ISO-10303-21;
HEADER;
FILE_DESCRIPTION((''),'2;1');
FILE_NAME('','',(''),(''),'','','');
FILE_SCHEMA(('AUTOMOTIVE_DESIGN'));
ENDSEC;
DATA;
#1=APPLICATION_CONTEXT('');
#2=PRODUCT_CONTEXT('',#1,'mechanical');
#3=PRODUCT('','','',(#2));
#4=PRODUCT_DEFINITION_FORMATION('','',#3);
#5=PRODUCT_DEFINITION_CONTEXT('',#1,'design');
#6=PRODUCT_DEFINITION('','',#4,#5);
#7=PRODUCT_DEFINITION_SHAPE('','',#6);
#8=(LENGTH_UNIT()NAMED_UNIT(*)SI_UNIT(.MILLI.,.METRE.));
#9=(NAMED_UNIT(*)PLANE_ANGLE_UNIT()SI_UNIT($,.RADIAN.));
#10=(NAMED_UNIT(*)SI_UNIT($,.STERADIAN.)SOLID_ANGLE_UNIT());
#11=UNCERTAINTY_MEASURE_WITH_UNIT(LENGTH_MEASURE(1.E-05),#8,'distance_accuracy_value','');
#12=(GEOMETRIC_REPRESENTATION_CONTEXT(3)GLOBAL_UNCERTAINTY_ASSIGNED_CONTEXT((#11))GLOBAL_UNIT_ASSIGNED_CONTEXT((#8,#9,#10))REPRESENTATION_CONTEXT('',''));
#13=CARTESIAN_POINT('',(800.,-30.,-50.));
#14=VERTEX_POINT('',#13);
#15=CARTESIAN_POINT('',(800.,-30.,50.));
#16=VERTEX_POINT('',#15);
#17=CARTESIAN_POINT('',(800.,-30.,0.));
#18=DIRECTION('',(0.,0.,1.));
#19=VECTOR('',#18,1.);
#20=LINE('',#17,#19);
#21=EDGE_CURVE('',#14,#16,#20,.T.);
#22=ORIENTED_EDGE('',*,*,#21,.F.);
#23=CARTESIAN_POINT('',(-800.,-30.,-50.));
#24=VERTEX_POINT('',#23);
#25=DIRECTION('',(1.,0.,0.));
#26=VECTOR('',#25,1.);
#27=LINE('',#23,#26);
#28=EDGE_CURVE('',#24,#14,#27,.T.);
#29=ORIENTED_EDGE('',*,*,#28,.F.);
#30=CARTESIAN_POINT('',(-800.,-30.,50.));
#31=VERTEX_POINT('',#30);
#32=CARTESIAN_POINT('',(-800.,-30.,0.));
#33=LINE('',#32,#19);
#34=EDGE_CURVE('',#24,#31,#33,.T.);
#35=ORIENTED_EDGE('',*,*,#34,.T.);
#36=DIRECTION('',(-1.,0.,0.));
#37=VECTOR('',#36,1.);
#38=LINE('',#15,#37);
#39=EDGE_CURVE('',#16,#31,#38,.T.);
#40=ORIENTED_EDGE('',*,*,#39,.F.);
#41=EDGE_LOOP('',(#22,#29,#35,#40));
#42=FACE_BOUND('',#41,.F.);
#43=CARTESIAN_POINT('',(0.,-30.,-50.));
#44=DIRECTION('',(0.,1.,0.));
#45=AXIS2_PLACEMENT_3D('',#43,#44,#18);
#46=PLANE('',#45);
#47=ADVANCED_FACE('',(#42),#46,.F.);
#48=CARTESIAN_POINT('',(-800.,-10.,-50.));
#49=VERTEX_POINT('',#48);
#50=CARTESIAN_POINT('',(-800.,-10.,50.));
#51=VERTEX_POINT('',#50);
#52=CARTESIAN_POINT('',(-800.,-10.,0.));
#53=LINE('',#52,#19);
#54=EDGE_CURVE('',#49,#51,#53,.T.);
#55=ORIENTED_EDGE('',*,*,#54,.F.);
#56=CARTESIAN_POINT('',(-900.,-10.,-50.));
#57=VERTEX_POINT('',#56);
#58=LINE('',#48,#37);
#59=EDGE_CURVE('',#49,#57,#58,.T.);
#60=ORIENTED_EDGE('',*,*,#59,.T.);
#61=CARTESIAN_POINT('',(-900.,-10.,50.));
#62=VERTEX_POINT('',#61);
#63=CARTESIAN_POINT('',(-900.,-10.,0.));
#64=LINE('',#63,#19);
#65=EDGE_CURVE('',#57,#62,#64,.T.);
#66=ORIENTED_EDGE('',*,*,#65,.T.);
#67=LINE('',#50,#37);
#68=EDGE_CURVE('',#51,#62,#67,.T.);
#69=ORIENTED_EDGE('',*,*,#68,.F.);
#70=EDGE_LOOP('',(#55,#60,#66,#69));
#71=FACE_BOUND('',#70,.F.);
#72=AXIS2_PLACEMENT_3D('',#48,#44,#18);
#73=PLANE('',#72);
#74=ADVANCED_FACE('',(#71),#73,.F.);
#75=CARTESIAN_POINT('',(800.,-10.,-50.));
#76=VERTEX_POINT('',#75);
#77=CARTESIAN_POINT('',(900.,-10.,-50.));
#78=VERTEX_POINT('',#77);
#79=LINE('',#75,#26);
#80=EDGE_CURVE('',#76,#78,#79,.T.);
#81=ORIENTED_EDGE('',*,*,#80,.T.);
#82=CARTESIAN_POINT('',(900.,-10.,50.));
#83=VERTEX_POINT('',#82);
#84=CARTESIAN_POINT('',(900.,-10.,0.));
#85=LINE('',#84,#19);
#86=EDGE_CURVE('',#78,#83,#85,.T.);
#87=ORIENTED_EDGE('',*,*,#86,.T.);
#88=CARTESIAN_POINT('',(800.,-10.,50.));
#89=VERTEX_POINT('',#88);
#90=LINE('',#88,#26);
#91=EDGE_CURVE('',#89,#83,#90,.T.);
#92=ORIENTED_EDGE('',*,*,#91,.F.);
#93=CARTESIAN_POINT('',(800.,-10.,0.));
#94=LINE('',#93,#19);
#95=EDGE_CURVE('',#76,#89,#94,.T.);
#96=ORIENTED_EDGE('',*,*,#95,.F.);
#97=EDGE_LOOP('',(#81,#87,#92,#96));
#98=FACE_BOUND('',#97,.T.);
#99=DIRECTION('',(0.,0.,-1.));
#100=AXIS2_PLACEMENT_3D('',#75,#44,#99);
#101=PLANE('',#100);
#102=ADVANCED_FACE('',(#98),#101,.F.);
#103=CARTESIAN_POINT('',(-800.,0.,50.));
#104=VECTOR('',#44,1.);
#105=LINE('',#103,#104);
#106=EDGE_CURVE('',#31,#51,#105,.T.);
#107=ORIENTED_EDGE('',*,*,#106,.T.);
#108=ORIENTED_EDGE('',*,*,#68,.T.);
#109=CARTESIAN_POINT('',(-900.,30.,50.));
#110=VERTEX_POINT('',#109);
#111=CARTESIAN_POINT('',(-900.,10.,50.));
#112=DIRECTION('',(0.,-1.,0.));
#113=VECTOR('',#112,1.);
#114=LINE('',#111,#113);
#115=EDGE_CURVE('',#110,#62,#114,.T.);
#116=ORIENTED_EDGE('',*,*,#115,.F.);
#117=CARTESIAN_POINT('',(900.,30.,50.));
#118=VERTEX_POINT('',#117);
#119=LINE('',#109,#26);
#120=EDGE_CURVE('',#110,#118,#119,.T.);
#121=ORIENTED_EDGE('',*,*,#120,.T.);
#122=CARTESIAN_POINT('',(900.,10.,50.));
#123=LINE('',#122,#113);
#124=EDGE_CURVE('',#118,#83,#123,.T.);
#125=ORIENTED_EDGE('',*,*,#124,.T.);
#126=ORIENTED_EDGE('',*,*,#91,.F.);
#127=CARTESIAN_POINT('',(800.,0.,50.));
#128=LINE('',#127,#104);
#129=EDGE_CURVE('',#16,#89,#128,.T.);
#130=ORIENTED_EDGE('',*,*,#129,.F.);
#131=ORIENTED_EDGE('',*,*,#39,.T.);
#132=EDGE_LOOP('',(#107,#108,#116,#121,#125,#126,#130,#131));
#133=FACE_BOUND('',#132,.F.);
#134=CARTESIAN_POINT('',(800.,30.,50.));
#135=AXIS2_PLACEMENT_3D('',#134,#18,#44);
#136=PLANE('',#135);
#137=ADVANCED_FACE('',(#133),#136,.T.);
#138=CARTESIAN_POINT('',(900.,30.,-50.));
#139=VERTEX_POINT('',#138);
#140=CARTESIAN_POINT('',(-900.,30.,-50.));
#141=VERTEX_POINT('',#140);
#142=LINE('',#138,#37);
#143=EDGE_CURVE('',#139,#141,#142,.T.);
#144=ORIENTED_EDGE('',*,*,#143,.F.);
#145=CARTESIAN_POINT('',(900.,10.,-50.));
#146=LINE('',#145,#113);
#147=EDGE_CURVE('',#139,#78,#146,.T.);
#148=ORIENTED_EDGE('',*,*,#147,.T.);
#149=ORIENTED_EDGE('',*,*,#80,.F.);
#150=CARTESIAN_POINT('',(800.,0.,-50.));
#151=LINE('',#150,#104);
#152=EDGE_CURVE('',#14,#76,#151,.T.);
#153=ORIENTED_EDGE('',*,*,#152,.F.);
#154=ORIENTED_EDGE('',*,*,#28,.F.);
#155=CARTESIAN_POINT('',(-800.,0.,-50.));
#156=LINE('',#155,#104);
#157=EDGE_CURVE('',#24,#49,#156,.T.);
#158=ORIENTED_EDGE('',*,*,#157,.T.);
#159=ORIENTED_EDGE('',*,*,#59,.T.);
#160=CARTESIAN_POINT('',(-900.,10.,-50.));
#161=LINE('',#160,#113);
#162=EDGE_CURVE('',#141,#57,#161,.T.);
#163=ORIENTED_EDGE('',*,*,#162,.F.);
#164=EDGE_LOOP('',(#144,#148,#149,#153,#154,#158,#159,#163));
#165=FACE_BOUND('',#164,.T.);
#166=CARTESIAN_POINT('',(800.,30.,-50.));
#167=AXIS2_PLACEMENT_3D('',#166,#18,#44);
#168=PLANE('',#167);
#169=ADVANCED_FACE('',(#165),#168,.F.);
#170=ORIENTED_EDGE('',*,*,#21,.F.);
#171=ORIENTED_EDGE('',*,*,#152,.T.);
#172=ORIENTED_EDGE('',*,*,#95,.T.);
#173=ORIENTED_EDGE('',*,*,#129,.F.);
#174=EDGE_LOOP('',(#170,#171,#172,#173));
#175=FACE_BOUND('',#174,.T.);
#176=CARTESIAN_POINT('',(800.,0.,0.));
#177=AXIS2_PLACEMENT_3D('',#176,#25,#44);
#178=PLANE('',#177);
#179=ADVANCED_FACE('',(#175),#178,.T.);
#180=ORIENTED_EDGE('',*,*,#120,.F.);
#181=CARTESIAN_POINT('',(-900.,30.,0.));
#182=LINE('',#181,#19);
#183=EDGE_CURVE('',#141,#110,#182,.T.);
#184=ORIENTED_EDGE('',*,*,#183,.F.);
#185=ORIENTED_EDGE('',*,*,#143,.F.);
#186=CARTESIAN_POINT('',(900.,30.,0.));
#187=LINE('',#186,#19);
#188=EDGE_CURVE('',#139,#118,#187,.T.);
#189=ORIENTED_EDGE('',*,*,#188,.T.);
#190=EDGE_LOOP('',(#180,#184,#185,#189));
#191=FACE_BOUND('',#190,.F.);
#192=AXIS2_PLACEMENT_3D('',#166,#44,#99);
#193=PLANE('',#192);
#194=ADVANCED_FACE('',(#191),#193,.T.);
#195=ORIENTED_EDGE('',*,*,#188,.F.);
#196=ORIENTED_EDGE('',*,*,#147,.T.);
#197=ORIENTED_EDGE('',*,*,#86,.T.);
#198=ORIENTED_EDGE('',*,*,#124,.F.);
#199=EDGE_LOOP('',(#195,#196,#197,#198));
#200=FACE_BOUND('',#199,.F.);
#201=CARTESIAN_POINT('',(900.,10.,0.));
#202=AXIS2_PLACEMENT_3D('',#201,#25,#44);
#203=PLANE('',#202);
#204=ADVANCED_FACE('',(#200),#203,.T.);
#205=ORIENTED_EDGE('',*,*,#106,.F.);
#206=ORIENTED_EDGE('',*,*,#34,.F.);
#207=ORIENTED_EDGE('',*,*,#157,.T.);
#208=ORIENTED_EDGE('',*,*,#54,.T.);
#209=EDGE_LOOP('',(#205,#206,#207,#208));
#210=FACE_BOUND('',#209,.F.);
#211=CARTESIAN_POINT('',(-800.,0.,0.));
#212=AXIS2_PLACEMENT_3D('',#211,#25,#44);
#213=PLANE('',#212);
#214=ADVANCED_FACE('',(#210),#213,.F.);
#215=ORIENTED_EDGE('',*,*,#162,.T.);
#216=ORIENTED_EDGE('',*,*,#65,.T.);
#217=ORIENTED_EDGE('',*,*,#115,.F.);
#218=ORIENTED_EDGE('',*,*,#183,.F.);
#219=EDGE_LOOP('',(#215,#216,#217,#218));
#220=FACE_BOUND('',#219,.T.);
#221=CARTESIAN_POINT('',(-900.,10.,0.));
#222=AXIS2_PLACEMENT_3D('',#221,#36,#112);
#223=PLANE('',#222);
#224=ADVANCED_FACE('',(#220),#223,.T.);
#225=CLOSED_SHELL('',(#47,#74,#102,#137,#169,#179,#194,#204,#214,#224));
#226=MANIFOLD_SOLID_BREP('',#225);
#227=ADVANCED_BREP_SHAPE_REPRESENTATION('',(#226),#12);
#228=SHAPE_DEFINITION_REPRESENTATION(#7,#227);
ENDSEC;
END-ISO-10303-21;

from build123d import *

# Parameters (mm, degrees)
F1_W     = 60
F1_H     = 100
F2_DEPTH = 800
F3_W     = 40
F3_H     = 100
F4_DEPTH = 100


# Not quite as in the source:
# - a pattern or mirror of a feature is missing from the dataset's text; its kind, count and spacing are read off the source's solid


with BuildPart() as f2:
    # F1 (on Right) → F2 (new body, symmetric)
    with BuildSketch(Plane.YZ):
        Rectangle(F1_W, F1_H)
    extrude(amount=F2_DEPTH, both=True)

    # F3 (on face) → F4 (join)
    with BuildSketch(Plane(origin=(-800, 0, 0), x_dir=(0, -1, 0), z_dir=(-1, 0, 0))):
        with Locations((-10, 0)):
            Rectangle(F3_W, F3_H)
    f4 = extrude(amount=F4_DEPTH)

    # F4_copies: F4 across plane
    add(f4.mirror(Plane(origin=(0, 0, 0), x_dir=(0, 0, 1), z_dir=(1, 0, 0))))


solid = f2.part
